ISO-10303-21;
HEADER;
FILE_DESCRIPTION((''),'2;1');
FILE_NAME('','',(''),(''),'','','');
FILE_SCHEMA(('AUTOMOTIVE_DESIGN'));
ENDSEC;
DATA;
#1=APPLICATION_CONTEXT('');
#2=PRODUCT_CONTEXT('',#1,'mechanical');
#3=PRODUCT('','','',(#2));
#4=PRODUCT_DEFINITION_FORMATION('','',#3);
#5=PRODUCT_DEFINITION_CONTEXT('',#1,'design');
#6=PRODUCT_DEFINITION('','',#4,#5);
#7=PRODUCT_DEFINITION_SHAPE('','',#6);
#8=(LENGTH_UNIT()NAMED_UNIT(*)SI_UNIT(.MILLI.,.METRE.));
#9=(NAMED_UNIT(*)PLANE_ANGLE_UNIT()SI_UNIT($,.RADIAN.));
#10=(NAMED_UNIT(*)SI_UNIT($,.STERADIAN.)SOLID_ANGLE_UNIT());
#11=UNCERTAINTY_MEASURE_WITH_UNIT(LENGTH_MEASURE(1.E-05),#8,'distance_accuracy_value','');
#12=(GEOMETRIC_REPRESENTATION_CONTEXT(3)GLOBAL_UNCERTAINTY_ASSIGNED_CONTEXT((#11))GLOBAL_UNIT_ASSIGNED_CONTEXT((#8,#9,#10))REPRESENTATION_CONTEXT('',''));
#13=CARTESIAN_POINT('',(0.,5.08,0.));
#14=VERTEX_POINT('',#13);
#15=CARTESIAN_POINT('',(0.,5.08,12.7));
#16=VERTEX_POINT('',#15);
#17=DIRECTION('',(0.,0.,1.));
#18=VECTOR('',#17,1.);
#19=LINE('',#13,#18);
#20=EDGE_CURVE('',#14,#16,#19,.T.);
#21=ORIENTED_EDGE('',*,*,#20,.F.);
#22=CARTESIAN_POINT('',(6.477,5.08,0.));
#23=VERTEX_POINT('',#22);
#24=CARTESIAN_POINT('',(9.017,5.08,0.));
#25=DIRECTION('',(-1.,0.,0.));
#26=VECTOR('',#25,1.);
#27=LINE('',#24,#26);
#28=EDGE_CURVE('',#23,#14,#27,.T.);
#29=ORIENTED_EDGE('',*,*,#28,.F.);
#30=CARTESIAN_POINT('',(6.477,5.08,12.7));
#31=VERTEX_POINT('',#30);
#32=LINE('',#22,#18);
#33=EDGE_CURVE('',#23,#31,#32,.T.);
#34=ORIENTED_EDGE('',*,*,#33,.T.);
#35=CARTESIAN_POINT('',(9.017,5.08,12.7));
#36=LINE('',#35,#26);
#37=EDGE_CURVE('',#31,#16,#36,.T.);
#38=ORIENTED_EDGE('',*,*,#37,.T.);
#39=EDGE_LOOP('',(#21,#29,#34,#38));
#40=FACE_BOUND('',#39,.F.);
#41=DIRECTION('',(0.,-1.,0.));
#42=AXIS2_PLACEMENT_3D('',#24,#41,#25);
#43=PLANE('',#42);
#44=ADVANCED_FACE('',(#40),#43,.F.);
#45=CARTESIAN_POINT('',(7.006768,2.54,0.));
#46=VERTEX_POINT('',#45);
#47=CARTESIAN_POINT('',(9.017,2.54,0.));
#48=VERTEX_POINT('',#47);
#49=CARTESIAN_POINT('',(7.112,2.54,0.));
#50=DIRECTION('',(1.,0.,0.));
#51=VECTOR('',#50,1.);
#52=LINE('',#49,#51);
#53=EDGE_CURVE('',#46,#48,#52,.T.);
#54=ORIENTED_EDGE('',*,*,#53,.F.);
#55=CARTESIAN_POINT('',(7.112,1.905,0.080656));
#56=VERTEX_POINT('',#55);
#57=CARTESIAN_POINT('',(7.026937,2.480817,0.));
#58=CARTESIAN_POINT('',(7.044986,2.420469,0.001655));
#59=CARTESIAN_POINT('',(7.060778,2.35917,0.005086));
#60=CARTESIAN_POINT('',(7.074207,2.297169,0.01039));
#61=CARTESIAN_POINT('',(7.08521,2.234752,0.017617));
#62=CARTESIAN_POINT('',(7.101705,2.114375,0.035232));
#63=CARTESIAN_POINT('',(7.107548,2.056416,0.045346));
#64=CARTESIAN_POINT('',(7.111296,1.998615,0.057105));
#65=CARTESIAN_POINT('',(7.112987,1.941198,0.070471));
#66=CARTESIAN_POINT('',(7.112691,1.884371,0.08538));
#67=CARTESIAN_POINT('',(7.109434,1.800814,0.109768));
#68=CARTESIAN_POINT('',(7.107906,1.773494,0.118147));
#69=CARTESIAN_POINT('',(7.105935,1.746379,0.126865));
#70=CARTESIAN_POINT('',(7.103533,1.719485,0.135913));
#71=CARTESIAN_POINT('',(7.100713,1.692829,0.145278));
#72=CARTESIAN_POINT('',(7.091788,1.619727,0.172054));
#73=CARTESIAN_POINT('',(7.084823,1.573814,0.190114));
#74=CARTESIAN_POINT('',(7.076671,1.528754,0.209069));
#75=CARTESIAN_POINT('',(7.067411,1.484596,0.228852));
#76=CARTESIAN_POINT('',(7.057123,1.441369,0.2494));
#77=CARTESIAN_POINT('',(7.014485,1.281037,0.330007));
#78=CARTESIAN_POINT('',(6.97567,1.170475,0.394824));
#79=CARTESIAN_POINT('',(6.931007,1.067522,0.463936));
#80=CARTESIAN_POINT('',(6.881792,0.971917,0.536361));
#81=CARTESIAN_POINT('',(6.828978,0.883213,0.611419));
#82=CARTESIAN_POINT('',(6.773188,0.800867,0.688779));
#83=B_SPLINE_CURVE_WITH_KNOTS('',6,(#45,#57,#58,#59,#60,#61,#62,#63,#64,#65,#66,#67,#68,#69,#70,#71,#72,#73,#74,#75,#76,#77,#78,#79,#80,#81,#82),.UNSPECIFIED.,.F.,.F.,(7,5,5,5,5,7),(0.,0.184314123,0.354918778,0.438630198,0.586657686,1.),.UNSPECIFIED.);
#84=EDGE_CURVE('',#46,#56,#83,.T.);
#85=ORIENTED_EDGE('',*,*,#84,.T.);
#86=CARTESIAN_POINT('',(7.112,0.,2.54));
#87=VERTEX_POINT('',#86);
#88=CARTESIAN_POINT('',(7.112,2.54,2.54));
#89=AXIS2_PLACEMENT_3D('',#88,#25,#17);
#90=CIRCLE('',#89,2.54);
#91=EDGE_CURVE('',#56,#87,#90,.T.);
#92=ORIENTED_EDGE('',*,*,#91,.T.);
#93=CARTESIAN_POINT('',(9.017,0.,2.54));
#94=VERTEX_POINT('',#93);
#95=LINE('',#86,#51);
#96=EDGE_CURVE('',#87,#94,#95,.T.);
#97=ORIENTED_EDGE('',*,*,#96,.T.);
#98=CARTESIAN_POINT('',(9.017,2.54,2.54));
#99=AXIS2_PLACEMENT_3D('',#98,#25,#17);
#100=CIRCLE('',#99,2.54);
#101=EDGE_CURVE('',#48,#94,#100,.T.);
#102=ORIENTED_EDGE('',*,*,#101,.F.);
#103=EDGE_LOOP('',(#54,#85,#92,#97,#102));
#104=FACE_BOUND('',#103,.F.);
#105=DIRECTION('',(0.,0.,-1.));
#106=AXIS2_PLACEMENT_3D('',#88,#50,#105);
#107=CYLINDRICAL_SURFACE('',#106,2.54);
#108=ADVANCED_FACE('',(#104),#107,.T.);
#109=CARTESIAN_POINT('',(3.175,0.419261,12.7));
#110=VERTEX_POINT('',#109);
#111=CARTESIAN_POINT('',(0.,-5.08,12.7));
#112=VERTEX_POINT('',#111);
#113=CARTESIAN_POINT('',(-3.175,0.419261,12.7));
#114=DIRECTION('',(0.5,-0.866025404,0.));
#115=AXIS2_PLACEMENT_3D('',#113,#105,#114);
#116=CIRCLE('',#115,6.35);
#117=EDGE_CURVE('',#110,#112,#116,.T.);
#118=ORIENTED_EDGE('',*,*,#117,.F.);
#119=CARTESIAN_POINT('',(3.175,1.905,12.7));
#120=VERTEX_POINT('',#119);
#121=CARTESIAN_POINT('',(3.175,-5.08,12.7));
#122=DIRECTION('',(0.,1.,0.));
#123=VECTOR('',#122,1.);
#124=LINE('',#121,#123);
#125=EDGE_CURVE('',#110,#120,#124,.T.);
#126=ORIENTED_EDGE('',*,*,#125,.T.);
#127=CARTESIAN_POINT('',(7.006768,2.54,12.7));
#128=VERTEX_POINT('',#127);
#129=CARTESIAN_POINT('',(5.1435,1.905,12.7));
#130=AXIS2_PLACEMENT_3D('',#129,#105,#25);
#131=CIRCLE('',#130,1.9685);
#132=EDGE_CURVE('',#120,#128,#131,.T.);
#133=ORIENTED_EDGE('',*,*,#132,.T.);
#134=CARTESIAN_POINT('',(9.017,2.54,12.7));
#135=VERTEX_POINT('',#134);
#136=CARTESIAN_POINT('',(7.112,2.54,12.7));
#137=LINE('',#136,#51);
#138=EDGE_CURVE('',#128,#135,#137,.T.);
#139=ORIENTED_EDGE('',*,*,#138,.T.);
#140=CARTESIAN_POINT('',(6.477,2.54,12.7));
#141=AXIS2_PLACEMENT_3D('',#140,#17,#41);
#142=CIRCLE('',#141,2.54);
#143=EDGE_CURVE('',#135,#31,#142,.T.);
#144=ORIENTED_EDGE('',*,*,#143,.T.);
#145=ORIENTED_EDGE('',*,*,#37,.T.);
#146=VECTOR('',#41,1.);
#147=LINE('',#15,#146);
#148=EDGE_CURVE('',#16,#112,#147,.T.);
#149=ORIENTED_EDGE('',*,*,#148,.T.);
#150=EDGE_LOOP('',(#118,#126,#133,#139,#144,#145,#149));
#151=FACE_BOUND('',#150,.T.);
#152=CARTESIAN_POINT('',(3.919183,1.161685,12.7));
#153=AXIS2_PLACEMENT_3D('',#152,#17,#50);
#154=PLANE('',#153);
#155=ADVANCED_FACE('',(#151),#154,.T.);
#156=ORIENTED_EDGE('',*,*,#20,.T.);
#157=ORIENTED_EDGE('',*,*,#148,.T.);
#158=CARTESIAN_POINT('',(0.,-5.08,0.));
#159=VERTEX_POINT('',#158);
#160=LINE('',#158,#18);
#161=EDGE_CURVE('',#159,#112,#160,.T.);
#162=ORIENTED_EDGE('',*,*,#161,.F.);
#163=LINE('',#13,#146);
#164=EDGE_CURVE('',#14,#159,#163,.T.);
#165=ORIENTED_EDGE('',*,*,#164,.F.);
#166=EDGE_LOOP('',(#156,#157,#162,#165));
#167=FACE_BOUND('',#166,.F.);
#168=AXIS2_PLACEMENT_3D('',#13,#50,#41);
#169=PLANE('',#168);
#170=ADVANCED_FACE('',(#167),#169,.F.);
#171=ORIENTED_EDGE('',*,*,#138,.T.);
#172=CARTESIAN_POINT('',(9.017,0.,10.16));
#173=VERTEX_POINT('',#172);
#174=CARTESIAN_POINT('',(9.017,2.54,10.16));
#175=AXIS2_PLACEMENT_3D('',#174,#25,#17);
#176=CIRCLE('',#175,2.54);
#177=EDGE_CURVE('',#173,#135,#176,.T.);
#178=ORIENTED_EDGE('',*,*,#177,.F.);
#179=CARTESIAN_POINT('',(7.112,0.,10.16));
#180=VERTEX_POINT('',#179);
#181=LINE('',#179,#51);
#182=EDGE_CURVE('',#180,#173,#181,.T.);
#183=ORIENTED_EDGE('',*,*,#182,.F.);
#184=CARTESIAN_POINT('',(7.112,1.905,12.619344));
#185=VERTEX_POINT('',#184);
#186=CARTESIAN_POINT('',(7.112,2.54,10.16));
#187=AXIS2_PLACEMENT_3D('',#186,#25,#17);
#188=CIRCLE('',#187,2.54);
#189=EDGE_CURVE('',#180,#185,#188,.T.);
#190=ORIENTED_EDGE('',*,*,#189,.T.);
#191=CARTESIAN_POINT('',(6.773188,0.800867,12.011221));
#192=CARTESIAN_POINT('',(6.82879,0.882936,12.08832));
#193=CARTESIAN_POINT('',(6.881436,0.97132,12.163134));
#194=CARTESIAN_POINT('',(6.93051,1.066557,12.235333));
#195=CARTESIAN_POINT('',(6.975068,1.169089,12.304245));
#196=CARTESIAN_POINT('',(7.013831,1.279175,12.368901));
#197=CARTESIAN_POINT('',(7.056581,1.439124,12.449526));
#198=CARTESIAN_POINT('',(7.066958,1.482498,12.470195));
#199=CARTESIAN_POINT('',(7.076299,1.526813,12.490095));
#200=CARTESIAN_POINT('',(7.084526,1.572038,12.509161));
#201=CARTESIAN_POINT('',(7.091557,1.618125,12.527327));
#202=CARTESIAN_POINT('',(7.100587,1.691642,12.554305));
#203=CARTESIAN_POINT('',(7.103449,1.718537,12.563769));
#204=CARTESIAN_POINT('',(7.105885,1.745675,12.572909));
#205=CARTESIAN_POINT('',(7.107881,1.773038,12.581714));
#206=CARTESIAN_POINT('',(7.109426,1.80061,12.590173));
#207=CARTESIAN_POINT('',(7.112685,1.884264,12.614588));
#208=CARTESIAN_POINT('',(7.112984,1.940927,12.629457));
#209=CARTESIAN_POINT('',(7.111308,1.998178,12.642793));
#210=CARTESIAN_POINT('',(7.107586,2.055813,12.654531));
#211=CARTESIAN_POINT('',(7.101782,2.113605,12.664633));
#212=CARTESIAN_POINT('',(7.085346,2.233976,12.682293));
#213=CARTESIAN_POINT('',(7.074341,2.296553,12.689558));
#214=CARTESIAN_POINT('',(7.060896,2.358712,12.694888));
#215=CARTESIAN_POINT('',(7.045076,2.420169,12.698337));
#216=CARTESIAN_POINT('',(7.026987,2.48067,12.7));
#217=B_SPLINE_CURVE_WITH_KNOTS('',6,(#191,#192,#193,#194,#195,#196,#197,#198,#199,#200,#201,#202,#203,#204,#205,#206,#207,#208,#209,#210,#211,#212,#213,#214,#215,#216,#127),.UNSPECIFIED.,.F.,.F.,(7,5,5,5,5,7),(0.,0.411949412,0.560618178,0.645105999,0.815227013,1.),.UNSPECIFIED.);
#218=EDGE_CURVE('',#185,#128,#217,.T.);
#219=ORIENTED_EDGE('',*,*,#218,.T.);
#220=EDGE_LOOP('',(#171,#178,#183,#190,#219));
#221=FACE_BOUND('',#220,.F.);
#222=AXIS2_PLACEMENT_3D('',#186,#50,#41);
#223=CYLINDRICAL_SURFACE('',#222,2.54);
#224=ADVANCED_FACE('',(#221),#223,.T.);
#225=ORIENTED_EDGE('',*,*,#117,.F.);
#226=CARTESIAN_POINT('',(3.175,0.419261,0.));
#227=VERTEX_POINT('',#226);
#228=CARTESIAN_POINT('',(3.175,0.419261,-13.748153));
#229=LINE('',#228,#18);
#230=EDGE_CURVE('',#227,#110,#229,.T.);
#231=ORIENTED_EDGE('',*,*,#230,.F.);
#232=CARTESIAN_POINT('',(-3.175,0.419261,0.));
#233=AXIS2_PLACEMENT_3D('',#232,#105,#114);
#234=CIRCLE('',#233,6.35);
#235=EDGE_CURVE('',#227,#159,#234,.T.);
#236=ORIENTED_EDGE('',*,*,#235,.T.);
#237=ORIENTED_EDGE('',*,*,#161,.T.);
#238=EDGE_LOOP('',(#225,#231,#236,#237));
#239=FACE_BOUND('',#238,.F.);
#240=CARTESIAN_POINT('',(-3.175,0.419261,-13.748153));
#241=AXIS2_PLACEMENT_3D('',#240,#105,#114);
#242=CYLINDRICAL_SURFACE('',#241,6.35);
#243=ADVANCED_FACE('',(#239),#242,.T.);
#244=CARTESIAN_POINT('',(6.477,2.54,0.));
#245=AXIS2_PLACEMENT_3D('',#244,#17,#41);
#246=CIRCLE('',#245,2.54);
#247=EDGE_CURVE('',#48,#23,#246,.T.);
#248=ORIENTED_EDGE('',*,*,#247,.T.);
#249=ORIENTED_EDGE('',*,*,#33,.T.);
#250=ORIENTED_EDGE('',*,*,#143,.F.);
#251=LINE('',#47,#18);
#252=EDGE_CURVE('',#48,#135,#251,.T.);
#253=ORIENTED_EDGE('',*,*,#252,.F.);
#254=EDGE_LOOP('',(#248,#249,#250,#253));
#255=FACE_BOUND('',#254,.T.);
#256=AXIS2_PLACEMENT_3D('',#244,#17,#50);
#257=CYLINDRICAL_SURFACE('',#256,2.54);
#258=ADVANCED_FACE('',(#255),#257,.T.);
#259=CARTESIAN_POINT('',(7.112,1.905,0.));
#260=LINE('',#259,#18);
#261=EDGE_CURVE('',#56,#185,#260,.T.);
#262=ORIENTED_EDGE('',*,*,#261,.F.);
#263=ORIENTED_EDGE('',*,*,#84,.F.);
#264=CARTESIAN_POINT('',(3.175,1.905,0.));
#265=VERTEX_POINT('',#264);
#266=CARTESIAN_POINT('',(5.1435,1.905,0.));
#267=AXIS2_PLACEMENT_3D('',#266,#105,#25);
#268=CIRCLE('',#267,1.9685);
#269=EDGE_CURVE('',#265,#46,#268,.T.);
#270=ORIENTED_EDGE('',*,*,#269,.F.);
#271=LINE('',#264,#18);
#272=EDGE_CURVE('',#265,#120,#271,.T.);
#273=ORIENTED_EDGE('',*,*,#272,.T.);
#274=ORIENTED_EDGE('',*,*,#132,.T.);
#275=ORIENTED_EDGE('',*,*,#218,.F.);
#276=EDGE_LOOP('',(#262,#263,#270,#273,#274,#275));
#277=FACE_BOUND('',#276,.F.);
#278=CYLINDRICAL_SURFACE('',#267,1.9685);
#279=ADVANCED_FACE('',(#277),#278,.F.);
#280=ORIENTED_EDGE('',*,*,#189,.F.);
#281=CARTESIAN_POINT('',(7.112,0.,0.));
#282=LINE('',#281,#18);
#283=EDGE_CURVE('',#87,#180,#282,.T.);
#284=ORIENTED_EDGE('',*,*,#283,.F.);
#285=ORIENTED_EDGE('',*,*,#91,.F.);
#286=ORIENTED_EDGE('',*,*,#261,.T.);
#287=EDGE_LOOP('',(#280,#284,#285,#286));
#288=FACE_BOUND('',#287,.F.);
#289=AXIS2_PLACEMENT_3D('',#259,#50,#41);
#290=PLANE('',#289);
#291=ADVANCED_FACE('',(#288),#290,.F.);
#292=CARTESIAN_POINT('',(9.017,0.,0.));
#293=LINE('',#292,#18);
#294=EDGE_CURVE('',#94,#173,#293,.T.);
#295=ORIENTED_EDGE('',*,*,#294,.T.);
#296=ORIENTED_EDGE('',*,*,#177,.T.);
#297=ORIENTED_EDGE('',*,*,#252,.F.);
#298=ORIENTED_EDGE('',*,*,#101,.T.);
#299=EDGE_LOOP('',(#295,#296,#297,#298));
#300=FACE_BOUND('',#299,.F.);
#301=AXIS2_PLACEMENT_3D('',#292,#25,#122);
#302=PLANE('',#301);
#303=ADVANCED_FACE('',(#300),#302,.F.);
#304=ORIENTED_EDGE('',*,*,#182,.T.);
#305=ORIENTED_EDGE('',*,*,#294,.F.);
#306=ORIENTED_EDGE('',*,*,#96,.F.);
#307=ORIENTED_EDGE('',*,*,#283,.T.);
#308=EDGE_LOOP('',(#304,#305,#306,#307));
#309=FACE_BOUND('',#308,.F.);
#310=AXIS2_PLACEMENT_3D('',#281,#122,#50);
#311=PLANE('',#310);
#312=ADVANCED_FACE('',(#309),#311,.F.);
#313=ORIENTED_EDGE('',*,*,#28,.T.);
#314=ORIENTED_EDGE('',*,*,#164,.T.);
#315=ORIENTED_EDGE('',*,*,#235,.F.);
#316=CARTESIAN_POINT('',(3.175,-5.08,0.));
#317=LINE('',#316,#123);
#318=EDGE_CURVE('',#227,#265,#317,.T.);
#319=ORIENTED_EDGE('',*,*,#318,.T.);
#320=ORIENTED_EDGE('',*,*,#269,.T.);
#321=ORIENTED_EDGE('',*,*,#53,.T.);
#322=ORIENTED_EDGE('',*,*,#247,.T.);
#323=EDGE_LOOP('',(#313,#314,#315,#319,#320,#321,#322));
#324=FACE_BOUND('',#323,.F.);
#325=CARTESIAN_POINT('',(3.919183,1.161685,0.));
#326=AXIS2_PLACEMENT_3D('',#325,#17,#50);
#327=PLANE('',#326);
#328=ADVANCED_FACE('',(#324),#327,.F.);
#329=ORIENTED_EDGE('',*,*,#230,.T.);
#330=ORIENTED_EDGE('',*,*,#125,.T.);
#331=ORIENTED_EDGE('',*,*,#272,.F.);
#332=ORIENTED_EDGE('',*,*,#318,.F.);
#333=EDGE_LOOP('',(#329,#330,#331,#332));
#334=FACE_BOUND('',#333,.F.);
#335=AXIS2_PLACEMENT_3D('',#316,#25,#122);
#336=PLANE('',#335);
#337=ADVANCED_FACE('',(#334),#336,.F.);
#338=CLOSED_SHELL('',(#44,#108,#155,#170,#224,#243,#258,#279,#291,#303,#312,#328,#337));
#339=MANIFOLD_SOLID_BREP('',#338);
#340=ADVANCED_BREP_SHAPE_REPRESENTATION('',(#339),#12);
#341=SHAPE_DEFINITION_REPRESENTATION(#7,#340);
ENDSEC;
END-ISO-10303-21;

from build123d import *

# Parameters (mm, degrees)
F1_DEPTH    = 12.7
F2_R        = 2.54
F3_T1_DEPTH = 40.1963065702
F4_R        = 2.54


# Not quite as in the source:
# - a fillet or chamfer that OpenCascade refuses, or shapes differently, is made with other operations: its cross-section is extruded or revolved along the edge and cut away or added


with BuildPart() as f1:
    # F0 (on Top) → F1 (new body)
    with BuildSketch(Plane.XY):
        with BuildLine():
            Line((0, 5.08), (0, -5.08))
            Line((0, -5.08), (3.175, -5.08))
            Line((3.175, -5.08), (3.175, 1.905))
            ThreePointArc((3.175, 1.905), (5.1435, 3.8735), (7.112, 1.905))
            Line((7.112, 1.905), (7.112, 0))
            Line((7.112, 0), (9.017, 0))
            Line((9.017, 0), (9.017, 5.08))
            Line((9.017, 5.08), (0, 5.08))
        make_face()
    extrude(amount=F1_DEPTH)

    # F2
    f2_edges = [f1.edges().sort_by_distance(p)[0] for p in [
        (9.017, 5.08, 6.35),
    ]]
    fillet(f2_edges, radius=F2_R)

    # F3: fillet of radius 6.35 on 1 edges, made by hand

    # F3_s2 → F3_t1 (cut)
    with BuildSketch(Plane.XY.offset(-13.7481532851)):
        with BuildLine():
            ThreePointArc((0, -5.08), (2.324261314, -2.755738686), (3.175, 0.419261314))
            Line((3.175, 0.419261314), (3.175, -5.08))
            Line((3.175, -5.08), (0, -5.08))
        make_face()
    extrude(amount=F3_T1_DEPTH, mode=Mode.SUBTRACT)

    # F4
    f4_edges = [f1.edges().sort_by_distance(p)[0] for p in [
        (8.0645, 0, 12.7),
        (8.0645, 0, 0),
    ]]
    fillet(f4_edges, radius=F4_R)


solid = f1.part
